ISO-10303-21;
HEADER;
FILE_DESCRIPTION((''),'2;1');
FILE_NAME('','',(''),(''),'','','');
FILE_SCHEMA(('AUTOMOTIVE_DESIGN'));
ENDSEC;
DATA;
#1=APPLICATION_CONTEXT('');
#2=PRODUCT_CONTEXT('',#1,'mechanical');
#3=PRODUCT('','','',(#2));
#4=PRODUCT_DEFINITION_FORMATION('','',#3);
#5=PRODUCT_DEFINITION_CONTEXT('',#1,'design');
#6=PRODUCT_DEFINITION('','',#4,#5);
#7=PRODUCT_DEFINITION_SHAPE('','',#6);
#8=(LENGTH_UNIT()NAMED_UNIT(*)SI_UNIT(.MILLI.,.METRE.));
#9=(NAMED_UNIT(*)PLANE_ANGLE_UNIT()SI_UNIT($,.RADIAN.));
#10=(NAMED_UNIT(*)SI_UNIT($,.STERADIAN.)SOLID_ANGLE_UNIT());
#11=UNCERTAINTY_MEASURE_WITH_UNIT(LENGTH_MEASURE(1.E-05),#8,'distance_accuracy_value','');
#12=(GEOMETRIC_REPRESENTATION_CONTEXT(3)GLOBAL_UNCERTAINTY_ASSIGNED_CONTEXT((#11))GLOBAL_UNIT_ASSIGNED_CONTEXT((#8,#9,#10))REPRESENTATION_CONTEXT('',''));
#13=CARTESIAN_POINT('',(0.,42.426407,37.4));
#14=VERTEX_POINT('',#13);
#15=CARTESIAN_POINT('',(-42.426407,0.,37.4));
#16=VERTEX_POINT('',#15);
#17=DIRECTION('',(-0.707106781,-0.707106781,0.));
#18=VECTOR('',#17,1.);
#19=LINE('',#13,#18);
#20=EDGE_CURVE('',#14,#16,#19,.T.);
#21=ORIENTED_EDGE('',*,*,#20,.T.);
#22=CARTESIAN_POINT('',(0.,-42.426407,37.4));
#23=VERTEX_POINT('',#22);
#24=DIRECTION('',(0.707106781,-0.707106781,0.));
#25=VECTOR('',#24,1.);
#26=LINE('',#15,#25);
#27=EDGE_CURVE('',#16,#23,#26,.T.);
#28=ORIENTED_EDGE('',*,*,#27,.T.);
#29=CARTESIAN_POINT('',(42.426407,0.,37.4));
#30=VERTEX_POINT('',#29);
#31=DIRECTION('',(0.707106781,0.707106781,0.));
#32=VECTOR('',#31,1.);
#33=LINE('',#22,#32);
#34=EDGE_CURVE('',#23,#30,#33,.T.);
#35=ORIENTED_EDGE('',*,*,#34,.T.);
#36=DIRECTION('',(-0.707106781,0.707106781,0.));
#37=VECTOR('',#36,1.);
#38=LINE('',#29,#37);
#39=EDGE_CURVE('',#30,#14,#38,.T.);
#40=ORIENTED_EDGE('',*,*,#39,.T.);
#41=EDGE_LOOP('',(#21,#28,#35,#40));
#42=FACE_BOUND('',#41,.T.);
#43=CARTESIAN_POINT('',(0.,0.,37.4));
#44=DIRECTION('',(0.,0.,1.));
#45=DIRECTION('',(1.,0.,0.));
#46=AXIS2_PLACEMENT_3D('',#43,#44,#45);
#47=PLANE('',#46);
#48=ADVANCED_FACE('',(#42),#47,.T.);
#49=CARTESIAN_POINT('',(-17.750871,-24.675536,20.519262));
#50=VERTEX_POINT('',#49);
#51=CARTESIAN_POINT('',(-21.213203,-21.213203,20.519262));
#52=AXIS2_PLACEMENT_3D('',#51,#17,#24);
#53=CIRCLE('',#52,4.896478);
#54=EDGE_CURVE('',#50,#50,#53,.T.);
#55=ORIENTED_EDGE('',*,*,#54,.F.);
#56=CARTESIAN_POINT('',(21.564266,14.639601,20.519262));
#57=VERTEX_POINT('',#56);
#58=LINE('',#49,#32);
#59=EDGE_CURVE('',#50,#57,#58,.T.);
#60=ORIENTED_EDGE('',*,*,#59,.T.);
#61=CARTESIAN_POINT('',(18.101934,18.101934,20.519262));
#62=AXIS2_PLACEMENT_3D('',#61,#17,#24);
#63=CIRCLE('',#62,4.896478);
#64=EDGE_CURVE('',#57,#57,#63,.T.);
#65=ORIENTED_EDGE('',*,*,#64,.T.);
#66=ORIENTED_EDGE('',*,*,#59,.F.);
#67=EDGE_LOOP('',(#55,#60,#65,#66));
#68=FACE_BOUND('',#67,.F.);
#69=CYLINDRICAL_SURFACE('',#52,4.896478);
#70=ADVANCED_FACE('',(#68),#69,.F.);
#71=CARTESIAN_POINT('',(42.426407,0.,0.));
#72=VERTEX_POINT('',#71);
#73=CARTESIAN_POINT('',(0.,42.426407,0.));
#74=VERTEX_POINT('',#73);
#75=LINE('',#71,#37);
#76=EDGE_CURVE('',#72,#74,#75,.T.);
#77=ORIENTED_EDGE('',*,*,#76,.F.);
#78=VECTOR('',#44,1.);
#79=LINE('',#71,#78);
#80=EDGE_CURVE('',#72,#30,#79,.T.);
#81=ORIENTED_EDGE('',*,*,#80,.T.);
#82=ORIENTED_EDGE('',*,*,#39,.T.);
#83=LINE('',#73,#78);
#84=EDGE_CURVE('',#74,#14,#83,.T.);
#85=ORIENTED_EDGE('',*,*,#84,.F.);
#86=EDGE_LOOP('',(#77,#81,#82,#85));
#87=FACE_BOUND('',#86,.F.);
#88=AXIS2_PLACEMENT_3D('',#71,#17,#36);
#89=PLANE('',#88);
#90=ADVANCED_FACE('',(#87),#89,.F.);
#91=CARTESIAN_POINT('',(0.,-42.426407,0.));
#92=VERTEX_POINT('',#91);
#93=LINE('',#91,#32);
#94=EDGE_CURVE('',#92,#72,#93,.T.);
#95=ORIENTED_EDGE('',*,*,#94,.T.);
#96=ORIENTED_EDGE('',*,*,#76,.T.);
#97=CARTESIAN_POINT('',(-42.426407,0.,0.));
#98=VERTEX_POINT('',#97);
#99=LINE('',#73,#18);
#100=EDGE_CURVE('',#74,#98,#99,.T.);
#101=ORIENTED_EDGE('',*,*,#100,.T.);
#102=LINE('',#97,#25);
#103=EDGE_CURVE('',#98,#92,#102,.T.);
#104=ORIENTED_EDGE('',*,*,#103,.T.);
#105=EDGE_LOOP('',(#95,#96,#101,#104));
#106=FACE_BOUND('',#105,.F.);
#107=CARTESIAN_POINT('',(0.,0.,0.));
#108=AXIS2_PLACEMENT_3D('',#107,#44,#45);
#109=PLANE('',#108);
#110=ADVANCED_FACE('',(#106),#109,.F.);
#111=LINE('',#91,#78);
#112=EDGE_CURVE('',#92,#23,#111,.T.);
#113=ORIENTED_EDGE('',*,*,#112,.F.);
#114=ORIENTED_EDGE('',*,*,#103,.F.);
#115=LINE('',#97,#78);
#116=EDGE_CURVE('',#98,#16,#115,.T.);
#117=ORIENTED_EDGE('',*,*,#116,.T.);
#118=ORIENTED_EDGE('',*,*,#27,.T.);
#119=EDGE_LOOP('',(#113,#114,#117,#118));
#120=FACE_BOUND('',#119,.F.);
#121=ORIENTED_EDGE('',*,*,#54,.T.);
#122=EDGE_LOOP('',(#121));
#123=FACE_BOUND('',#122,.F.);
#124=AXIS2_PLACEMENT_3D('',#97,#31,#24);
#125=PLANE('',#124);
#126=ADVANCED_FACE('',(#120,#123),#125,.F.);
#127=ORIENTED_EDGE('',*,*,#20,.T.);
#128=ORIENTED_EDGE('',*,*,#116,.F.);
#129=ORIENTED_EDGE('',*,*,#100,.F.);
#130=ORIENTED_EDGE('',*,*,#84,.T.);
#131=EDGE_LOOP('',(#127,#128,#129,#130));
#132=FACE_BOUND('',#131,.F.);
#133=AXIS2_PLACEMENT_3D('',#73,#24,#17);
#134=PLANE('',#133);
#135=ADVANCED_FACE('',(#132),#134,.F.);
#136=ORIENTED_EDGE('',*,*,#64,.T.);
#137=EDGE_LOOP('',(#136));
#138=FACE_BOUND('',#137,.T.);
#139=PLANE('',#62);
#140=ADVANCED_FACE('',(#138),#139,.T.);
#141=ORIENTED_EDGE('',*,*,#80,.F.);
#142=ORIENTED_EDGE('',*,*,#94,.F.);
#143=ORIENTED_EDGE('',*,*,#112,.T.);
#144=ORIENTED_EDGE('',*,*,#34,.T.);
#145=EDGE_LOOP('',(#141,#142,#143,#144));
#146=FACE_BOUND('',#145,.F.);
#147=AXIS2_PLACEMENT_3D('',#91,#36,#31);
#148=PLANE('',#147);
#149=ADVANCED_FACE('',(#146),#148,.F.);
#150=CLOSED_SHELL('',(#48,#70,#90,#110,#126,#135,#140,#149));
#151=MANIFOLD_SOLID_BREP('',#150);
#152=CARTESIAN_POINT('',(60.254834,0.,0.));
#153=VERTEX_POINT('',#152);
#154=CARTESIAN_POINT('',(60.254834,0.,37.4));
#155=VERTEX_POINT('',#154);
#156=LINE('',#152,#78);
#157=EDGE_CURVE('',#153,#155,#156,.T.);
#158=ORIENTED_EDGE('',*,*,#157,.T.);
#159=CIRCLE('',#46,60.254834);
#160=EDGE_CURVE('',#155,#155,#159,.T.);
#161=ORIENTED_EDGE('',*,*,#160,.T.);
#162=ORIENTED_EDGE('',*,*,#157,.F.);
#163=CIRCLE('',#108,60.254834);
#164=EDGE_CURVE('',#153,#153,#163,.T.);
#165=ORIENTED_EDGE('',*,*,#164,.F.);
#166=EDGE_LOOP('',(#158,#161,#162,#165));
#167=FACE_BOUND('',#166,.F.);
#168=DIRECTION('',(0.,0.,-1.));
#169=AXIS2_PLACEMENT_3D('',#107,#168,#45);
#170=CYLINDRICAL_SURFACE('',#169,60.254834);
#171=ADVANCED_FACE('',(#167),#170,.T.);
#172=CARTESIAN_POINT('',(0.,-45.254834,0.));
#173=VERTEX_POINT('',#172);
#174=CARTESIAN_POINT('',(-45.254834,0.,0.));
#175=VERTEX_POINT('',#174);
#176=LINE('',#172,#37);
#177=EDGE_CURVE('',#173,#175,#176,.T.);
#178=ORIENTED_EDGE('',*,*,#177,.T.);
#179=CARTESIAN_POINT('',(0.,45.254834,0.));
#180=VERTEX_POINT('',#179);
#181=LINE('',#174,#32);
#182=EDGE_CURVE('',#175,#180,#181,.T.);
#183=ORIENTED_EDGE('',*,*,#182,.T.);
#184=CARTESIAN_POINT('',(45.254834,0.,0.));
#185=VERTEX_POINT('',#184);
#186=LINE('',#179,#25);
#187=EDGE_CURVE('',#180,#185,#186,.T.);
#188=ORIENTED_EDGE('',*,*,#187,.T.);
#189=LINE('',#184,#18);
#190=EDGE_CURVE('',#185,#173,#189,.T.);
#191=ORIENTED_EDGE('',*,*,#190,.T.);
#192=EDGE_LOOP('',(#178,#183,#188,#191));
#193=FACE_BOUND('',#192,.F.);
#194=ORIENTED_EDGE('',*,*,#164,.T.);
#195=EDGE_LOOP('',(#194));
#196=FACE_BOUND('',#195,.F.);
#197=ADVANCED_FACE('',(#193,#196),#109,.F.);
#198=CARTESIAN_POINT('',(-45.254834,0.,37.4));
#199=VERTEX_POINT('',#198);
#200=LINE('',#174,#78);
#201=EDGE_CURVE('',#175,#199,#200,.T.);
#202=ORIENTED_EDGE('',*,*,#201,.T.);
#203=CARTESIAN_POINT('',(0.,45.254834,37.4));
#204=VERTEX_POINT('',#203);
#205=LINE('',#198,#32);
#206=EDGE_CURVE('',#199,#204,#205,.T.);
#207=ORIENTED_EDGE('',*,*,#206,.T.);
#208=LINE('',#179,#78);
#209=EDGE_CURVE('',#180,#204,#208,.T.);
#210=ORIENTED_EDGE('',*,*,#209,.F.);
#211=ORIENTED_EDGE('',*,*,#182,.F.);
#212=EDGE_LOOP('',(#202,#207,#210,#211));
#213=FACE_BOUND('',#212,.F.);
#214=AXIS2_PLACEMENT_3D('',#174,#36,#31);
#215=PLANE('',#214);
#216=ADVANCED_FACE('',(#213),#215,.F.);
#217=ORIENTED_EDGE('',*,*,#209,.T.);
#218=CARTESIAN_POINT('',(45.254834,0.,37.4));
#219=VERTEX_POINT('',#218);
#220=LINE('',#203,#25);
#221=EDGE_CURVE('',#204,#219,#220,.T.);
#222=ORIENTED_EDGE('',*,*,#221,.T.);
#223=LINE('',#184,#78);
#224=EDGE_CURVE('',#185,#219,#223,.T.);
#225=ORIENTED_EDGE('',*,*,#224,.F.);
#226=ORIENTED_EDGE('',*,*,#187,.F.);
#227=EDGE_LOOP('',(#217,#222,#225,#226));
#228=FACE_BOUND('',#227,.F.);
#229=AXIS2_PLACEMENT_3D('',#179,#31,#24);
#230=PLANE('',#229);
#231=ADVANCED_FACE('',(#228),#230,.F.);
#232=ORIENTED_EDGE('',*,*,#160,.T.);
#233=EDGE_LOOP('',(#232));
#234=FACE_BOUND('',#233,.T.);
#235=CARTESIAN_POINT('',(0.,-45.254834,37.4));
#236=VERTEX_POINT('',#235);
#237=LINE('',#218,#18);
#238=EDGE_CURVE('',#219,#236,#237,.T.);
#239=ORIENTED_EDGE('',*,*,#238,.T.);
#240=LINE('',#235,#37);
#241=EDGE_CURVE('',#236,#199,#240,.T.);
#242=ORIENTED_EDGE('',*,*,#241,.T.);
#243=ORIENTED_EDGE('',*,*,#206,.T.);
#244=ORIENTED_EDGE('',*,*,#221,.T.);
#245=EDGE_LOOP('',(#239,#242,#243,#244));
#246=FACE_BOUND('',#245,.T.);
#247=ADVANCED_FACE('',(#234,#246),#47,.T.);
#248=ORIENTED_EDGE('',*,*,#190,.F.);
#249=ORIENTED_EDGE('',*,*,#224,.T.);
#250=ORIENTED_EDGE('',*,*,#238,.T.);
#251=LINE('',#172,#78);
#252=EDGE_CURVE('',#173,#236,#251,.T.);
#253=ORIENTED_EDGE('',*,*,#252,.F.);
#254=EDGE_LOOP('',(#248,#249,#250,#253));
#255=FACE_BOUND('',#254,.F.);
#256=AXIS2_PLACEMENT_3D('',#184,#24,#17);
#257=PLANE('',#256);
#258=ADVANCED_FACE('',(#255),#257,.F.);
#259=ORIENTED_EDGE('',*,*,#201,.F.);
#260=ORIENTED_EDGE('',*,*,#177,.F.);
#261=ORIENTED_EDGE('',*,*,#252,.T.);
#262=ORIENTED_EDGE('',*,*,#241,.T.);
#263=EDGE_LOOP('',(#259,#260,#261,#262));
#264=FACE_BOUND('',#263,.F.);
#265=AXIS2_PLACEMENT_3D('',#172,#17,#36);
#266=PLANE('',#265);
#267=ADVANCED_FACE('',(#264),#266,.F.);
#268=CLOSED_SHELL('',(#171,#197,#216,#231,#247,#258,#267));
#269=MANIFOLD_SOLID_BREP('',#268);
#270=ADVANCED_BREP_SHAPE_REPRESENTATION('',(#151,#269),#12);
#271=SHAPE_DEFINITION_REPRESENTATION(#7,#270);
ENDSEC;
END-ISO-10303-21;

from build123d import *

# Parameters (mm, degrees)
F1_DEPTH = 37.4
F2_R     = 4.8964779363
F3_DEPTH = 55.6
F4_R     = 60.2548339959
F5_DEPTH = 37.4


with BuildPart() as f1:
    # F0 (on Top) → F1 (new body)
    with BuildSketch(Plane.XY):
        Polygon((0, 42.4264068712), (-42.4264068712, 0), (0, -42.4264068712), (42.4264068712, 0), align=None)
    extrude(amount=F1_DEPTH)

    # F2 (on face) → F3 (cut)
    with BuildSketch(Plane(origin=(-21.2132034356, -21.2132034356, 0), x_dir=(0.7071067812, -0.7071067812, 0), z_dir=(-0.7071067812, -0.7071067812, 0))):
        with Locations((0, 20.5192621797)):
            Circle(F2_R)
    extrude(amount=-F3_DEPTH, mode=Mode.SUBTRACT)


with BuildPart() as f5:
    # F4 (on Top) → F5 (new body, through all)
    with BuildSketch(Plane.XY):
        Circle(F4_R)
        Polygon((45.2548339959, 0), (0, -45.2548339959), (-45.2548339959, 0), (0, 45.2548339959), align=None, mode=Mode.SUBTRACT)
    extrude(amount=F5_DEPTH)


solid = Compound([f1.part, f5.part])
